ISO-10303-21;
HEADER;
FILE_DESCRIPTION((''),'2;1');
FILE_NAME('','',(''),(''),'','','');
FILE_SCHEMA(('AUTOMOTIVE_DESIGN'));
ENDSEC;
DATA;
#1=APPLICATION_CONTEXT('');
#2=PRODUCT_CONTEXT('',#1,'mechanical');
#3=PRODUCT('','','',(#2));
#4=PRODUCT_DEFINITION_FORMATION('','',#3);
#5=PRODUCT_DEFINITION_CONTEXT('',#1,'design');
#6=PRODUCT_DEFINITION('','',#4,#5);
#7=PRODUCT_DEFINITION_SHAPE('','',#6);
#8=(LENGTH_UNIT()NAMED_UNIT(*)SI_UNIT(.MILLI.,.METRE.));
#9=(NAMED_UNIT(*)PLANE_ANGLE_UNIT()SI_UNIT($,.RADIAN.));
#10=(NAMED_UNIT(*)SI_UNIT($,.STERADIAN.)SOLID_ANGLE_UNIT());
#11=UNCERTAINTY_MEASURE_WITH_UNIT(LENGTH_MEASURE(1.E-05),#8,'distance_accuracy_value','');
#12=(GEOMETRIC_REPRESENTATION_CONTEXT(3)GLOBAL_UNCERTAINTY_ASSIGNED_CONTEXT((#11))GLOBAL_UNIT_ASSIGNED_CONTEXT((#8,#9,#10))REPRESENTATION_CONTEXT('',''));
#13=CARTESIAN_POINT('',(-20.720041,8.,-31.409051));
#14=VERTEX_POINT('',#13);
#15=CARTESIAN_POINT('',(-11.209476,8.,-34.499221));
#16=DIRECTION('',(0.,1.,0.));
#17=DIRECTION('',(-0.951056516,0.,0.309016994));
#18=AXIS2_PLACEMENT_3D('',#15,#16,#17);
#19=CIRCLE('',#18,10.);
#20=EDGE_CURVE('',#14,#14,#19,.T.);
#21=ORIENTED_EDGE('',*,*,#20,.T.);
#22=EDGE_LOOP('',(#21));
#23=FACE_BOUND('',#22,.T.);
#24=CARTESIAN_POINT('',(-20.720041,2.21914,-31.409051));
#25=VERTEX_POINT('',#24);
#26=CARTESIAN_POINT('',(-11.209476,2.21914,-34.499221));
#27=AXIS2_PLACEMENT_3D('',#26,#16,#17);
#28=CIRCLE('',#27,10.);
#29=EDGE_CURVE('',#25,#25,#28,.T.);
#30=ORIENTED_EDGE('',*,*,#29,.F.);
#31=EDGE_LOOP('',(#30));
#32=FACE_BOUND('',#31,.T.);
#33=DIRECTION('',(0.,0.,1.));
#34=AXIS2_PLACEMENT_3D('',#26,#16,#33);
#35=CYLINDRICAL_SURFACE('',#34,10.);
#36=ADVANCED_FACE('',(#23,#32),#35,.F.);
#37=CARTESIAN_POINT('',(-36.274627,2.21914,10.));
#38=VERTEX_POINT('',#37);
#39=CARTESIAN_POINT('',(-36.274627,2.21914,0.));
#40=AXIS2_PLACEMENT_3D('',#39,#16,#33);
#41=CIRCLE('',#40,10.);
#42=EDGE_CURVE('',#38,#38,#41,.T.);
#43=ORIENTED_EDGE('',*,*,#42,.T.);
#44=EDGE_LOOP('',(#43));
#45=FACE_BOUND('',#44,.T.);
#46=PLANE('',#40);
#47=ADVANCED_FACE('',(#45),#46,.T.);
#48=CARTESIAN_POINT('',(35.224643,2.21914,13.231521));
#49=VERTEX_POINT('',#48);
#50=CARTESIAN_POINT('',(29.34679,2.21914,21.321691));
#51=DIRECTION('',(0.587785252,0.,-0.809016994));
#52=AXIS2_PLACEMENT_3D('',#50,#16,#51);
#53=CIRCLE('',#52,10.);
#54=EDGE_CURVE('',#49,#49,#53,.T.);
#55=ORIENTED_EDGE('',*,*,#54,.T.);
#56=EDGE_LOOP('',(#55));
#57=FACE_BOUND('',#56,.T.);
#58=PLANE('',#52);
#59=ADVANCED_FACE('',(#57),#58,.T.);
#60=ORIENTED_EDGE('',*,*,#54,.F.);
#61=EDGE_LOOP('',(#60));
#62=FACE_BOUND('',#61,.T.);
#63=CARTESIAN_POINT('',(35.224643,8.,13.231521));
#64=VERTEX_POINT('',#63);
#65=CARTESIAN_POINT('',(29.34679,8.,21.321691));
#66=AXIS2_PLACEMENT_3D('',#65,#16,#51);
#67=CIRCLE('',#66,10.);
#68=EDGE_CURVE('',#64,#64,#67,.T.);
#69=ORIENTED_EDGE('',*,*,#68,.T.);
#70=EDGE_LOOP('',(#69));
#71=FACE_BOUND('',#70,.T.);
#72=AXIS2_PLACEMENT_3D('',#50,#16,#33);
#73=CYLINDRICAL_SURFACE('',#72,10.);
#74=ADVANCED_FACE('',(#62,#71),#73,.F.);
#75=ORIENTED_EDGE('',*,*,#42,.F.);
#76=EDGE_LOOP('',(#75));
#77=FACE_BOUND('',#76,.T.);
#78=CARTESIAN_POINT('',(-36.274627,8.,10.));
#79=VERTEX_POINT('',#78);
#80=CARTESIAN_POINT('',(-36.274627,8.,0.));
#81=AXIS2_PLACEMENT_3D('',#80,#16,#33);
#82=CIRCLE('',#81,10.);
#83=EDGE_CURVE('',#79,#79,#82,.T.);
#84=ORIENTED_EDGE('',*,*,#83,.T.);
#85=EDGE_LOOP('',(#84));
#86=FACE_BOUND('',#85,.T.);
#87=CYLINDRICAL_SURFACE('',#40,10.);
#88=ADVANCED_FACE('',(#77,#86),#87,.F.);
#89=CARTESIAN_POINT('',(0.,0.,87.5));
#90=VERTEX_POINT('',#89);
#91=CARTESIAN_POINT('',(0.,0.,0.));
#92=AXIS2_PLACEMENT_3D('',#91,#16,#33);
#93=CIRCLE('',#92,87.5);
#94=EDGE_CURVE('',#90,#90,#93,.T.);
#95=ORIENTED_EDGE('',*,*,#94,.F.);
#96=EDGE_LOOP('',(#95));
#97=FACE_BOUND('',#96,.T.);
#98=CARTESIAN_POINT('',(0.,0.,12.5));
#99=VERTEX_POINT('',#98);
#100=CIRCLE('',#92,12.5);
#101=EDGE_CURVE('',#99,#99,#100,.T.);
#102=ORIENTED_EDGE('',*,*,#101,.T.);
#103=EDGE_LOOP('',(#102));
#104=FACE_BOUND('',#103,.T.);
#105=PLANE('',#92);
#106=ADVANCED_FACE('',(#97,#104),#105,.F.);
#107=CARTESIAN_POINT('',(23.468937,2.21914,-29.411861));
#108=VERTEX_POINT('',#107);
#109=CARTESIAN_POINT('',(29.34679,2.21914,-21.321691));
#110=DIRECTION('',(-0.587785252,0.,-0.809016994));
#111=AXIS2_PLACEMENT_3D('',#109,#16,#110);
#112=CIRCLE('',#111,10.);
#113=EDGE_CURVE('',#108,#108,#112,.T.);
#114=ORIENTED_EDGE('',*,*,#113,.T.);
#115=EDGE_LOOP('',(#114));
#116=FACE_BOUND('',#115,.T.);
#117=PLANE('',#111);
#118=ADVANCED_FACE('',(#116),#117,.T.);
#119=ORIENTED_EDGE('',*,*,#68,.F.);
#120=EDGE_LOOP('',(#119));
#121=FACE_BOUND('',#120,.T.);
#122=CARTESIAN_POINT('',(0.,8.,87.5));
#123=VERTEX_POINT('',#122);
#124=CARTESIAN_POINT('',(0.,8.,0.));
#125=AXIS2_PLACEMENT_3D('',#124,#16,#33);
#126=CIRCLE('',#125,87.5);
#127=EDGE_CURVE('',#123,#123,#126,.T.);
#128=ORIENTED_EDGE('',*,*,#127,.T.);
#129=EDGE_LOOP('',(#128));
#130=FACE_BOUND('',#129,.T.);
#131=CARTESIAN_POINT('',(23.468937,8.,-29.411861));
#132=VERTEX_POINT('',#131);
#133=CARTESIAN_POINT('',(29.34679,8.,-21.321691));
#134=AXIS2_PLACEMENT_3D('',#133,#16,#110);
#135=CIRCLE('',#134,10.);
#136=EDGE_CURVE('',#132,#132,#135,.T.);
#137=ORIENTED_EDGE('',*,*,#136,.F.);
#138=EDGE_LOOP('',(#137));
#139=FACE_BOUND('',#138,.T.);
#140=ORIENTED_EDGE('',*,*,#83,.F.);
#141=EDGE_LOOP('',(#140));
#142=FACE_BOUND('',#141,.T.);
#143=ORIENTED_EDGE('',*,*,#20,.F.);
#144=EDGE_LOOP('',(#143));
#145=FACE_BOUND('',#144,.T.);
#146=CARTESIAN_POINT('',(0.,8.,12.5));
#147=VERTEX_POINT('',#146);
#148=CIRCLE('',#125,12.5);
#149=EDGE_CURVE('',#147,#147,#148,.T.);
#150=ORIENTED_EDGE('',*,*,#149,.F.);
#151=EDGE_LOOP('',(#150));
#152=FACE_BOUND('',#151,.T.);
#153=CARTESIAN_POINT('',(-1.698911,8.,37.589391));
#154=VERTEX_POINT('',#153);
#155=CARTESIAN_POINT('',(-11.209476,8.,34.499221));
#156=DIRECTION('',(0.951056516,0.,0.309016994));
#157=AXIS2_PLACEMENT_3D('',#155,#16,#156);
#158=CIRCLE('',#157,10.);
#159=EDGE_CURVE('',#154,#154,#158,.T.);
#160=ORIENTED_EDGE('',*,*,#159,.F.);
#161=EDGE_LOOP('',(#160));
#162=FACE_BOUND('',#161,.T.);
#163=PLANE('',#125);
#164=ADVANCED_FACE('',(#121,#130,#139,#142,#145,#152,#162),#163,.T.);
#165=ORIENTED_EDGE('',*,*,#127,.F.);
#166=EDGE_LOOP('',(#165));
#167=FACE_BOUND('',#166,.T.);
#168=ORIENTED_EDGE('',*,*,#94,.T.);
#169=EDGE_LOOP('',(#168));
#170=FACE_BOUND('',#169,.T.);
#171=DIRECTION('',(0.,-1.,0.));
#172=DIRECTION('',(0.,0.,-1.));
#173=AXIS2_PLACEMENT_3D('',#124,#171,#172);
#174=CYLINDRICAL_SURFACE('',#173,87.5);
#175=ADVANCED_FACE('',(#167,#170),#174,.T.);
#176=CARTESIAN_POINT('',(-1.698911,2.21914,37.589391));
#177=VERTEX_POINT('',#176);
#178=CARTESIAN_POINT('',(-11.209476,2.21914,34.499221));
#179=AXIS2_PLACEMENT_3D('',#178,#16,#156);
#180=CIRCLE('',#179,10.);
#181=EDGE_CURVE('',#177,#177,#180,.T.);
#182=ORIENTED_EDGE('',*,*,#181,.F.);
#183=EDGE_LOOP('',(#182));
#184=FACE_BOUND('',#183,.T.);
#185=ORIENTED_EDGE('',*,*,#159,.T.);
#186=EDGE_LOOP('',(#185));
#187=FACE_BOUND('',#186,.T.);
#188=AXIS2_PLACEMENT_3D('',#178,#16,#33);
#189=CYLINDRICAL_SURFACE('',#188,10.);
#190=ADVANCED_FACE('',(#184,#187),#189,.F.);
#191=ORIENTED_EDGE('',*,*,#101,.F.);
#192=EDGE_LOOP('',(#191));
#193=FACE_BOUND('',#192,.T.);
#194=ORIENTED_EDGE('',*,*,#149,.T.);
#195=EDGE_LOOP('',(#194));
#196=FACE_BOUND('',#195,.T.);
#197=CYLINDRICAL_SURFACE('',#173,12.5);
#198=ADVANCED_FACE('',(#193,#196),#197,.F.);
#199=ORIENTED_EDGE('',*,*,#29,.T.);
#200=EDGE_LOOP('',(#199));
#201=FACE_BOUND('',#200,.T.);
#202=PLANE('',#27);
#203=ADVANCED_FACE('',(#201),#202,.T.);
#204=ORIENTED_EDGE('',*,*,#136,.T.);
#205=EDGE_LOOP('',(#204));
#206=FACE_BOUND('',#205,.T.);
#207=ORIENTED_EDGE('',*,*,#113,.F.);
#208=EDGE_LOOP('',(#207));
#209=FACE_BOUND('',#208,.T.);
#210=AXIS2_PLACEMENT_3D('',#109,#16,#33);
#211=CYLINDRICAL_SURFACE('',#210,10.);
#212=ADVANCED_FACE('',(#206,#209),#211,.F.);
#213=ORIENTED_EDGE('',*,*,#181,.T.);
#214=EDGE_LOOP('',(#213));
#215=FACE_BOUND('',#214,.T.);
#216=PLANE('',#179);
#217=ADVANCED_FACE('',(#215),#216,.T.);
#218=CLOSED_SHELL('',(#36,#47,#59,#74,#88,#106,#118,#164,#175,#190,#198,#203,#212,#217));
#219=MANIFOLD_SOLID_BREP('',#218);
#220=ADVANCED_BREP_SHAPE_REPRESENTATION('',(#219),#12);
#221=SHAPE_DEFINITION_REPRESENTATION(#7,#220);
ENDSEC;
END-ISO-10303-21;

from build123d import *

# Parameters (mm, degrees)
SKETCH1_R           = 87.5
BOSS_EXTRUDE1_DEPTH = 8
SKETCH2_R           = 12.5
CUT_EXTRUDE1_DEPTH  = 125.002016113
SKETCH3_R           = 10
CUT_EXTRUDE2_DEPTH  = 5.78086032
CIRPATTERN1_COUNT   = 5


with BuildPart() as part:
    # Sketch1 → Boss-Extrude1 (new body)
    with BuildSketch(Plane(origin=(0, 0, 0), x_dir=(1, 0, 0), z_dir=(0, 1, 0))):
        Circle(SKETCH1_R)
    extrude(amount=BOSS_EXTRUDE1_DEPTH)

    # Sketch2 → Cut-Extrude1 (cut, through all)
    with BuildSketch(Plane(origin=(0, 0, 0), x_dir=(1, 0, 0), z_dir=(0, 1, 0))):
        Circle(SKETCH2_R)
    extrude(amount=CUT_EXTRUDE1_DEPTH, mode=Mode.SUBTRACT)

    # Sketch3 → Cut-Extrude2 (cut)
    with BuildSketch(Plane(origin=(0, 8, 0), x_dir=(1, 0, 0), z_dir=(0, 1, 0))):
        with Locations((-36.274627371, 0)):
            Circle(SKETCH3_R)
    cut_extrude2 = extrude(amount=-CUT_EXTRUDE2_DEPTH, mode=Mode.SUBTRACT)

    # CirPattern1: Cut-Extrude2 ×5 about axis
    cirpattern1_axis = Axis((0, 0, 0), (0, 1, 0))
    for i in range(1, CIRPATTERN1_COUNT):
        add(cut_extrude2.rotate(cirpattern1_axis, i * 360 / CIRPATTERN1_COUNT), mode=Mode.SUBTRACT)


solid = part.part
